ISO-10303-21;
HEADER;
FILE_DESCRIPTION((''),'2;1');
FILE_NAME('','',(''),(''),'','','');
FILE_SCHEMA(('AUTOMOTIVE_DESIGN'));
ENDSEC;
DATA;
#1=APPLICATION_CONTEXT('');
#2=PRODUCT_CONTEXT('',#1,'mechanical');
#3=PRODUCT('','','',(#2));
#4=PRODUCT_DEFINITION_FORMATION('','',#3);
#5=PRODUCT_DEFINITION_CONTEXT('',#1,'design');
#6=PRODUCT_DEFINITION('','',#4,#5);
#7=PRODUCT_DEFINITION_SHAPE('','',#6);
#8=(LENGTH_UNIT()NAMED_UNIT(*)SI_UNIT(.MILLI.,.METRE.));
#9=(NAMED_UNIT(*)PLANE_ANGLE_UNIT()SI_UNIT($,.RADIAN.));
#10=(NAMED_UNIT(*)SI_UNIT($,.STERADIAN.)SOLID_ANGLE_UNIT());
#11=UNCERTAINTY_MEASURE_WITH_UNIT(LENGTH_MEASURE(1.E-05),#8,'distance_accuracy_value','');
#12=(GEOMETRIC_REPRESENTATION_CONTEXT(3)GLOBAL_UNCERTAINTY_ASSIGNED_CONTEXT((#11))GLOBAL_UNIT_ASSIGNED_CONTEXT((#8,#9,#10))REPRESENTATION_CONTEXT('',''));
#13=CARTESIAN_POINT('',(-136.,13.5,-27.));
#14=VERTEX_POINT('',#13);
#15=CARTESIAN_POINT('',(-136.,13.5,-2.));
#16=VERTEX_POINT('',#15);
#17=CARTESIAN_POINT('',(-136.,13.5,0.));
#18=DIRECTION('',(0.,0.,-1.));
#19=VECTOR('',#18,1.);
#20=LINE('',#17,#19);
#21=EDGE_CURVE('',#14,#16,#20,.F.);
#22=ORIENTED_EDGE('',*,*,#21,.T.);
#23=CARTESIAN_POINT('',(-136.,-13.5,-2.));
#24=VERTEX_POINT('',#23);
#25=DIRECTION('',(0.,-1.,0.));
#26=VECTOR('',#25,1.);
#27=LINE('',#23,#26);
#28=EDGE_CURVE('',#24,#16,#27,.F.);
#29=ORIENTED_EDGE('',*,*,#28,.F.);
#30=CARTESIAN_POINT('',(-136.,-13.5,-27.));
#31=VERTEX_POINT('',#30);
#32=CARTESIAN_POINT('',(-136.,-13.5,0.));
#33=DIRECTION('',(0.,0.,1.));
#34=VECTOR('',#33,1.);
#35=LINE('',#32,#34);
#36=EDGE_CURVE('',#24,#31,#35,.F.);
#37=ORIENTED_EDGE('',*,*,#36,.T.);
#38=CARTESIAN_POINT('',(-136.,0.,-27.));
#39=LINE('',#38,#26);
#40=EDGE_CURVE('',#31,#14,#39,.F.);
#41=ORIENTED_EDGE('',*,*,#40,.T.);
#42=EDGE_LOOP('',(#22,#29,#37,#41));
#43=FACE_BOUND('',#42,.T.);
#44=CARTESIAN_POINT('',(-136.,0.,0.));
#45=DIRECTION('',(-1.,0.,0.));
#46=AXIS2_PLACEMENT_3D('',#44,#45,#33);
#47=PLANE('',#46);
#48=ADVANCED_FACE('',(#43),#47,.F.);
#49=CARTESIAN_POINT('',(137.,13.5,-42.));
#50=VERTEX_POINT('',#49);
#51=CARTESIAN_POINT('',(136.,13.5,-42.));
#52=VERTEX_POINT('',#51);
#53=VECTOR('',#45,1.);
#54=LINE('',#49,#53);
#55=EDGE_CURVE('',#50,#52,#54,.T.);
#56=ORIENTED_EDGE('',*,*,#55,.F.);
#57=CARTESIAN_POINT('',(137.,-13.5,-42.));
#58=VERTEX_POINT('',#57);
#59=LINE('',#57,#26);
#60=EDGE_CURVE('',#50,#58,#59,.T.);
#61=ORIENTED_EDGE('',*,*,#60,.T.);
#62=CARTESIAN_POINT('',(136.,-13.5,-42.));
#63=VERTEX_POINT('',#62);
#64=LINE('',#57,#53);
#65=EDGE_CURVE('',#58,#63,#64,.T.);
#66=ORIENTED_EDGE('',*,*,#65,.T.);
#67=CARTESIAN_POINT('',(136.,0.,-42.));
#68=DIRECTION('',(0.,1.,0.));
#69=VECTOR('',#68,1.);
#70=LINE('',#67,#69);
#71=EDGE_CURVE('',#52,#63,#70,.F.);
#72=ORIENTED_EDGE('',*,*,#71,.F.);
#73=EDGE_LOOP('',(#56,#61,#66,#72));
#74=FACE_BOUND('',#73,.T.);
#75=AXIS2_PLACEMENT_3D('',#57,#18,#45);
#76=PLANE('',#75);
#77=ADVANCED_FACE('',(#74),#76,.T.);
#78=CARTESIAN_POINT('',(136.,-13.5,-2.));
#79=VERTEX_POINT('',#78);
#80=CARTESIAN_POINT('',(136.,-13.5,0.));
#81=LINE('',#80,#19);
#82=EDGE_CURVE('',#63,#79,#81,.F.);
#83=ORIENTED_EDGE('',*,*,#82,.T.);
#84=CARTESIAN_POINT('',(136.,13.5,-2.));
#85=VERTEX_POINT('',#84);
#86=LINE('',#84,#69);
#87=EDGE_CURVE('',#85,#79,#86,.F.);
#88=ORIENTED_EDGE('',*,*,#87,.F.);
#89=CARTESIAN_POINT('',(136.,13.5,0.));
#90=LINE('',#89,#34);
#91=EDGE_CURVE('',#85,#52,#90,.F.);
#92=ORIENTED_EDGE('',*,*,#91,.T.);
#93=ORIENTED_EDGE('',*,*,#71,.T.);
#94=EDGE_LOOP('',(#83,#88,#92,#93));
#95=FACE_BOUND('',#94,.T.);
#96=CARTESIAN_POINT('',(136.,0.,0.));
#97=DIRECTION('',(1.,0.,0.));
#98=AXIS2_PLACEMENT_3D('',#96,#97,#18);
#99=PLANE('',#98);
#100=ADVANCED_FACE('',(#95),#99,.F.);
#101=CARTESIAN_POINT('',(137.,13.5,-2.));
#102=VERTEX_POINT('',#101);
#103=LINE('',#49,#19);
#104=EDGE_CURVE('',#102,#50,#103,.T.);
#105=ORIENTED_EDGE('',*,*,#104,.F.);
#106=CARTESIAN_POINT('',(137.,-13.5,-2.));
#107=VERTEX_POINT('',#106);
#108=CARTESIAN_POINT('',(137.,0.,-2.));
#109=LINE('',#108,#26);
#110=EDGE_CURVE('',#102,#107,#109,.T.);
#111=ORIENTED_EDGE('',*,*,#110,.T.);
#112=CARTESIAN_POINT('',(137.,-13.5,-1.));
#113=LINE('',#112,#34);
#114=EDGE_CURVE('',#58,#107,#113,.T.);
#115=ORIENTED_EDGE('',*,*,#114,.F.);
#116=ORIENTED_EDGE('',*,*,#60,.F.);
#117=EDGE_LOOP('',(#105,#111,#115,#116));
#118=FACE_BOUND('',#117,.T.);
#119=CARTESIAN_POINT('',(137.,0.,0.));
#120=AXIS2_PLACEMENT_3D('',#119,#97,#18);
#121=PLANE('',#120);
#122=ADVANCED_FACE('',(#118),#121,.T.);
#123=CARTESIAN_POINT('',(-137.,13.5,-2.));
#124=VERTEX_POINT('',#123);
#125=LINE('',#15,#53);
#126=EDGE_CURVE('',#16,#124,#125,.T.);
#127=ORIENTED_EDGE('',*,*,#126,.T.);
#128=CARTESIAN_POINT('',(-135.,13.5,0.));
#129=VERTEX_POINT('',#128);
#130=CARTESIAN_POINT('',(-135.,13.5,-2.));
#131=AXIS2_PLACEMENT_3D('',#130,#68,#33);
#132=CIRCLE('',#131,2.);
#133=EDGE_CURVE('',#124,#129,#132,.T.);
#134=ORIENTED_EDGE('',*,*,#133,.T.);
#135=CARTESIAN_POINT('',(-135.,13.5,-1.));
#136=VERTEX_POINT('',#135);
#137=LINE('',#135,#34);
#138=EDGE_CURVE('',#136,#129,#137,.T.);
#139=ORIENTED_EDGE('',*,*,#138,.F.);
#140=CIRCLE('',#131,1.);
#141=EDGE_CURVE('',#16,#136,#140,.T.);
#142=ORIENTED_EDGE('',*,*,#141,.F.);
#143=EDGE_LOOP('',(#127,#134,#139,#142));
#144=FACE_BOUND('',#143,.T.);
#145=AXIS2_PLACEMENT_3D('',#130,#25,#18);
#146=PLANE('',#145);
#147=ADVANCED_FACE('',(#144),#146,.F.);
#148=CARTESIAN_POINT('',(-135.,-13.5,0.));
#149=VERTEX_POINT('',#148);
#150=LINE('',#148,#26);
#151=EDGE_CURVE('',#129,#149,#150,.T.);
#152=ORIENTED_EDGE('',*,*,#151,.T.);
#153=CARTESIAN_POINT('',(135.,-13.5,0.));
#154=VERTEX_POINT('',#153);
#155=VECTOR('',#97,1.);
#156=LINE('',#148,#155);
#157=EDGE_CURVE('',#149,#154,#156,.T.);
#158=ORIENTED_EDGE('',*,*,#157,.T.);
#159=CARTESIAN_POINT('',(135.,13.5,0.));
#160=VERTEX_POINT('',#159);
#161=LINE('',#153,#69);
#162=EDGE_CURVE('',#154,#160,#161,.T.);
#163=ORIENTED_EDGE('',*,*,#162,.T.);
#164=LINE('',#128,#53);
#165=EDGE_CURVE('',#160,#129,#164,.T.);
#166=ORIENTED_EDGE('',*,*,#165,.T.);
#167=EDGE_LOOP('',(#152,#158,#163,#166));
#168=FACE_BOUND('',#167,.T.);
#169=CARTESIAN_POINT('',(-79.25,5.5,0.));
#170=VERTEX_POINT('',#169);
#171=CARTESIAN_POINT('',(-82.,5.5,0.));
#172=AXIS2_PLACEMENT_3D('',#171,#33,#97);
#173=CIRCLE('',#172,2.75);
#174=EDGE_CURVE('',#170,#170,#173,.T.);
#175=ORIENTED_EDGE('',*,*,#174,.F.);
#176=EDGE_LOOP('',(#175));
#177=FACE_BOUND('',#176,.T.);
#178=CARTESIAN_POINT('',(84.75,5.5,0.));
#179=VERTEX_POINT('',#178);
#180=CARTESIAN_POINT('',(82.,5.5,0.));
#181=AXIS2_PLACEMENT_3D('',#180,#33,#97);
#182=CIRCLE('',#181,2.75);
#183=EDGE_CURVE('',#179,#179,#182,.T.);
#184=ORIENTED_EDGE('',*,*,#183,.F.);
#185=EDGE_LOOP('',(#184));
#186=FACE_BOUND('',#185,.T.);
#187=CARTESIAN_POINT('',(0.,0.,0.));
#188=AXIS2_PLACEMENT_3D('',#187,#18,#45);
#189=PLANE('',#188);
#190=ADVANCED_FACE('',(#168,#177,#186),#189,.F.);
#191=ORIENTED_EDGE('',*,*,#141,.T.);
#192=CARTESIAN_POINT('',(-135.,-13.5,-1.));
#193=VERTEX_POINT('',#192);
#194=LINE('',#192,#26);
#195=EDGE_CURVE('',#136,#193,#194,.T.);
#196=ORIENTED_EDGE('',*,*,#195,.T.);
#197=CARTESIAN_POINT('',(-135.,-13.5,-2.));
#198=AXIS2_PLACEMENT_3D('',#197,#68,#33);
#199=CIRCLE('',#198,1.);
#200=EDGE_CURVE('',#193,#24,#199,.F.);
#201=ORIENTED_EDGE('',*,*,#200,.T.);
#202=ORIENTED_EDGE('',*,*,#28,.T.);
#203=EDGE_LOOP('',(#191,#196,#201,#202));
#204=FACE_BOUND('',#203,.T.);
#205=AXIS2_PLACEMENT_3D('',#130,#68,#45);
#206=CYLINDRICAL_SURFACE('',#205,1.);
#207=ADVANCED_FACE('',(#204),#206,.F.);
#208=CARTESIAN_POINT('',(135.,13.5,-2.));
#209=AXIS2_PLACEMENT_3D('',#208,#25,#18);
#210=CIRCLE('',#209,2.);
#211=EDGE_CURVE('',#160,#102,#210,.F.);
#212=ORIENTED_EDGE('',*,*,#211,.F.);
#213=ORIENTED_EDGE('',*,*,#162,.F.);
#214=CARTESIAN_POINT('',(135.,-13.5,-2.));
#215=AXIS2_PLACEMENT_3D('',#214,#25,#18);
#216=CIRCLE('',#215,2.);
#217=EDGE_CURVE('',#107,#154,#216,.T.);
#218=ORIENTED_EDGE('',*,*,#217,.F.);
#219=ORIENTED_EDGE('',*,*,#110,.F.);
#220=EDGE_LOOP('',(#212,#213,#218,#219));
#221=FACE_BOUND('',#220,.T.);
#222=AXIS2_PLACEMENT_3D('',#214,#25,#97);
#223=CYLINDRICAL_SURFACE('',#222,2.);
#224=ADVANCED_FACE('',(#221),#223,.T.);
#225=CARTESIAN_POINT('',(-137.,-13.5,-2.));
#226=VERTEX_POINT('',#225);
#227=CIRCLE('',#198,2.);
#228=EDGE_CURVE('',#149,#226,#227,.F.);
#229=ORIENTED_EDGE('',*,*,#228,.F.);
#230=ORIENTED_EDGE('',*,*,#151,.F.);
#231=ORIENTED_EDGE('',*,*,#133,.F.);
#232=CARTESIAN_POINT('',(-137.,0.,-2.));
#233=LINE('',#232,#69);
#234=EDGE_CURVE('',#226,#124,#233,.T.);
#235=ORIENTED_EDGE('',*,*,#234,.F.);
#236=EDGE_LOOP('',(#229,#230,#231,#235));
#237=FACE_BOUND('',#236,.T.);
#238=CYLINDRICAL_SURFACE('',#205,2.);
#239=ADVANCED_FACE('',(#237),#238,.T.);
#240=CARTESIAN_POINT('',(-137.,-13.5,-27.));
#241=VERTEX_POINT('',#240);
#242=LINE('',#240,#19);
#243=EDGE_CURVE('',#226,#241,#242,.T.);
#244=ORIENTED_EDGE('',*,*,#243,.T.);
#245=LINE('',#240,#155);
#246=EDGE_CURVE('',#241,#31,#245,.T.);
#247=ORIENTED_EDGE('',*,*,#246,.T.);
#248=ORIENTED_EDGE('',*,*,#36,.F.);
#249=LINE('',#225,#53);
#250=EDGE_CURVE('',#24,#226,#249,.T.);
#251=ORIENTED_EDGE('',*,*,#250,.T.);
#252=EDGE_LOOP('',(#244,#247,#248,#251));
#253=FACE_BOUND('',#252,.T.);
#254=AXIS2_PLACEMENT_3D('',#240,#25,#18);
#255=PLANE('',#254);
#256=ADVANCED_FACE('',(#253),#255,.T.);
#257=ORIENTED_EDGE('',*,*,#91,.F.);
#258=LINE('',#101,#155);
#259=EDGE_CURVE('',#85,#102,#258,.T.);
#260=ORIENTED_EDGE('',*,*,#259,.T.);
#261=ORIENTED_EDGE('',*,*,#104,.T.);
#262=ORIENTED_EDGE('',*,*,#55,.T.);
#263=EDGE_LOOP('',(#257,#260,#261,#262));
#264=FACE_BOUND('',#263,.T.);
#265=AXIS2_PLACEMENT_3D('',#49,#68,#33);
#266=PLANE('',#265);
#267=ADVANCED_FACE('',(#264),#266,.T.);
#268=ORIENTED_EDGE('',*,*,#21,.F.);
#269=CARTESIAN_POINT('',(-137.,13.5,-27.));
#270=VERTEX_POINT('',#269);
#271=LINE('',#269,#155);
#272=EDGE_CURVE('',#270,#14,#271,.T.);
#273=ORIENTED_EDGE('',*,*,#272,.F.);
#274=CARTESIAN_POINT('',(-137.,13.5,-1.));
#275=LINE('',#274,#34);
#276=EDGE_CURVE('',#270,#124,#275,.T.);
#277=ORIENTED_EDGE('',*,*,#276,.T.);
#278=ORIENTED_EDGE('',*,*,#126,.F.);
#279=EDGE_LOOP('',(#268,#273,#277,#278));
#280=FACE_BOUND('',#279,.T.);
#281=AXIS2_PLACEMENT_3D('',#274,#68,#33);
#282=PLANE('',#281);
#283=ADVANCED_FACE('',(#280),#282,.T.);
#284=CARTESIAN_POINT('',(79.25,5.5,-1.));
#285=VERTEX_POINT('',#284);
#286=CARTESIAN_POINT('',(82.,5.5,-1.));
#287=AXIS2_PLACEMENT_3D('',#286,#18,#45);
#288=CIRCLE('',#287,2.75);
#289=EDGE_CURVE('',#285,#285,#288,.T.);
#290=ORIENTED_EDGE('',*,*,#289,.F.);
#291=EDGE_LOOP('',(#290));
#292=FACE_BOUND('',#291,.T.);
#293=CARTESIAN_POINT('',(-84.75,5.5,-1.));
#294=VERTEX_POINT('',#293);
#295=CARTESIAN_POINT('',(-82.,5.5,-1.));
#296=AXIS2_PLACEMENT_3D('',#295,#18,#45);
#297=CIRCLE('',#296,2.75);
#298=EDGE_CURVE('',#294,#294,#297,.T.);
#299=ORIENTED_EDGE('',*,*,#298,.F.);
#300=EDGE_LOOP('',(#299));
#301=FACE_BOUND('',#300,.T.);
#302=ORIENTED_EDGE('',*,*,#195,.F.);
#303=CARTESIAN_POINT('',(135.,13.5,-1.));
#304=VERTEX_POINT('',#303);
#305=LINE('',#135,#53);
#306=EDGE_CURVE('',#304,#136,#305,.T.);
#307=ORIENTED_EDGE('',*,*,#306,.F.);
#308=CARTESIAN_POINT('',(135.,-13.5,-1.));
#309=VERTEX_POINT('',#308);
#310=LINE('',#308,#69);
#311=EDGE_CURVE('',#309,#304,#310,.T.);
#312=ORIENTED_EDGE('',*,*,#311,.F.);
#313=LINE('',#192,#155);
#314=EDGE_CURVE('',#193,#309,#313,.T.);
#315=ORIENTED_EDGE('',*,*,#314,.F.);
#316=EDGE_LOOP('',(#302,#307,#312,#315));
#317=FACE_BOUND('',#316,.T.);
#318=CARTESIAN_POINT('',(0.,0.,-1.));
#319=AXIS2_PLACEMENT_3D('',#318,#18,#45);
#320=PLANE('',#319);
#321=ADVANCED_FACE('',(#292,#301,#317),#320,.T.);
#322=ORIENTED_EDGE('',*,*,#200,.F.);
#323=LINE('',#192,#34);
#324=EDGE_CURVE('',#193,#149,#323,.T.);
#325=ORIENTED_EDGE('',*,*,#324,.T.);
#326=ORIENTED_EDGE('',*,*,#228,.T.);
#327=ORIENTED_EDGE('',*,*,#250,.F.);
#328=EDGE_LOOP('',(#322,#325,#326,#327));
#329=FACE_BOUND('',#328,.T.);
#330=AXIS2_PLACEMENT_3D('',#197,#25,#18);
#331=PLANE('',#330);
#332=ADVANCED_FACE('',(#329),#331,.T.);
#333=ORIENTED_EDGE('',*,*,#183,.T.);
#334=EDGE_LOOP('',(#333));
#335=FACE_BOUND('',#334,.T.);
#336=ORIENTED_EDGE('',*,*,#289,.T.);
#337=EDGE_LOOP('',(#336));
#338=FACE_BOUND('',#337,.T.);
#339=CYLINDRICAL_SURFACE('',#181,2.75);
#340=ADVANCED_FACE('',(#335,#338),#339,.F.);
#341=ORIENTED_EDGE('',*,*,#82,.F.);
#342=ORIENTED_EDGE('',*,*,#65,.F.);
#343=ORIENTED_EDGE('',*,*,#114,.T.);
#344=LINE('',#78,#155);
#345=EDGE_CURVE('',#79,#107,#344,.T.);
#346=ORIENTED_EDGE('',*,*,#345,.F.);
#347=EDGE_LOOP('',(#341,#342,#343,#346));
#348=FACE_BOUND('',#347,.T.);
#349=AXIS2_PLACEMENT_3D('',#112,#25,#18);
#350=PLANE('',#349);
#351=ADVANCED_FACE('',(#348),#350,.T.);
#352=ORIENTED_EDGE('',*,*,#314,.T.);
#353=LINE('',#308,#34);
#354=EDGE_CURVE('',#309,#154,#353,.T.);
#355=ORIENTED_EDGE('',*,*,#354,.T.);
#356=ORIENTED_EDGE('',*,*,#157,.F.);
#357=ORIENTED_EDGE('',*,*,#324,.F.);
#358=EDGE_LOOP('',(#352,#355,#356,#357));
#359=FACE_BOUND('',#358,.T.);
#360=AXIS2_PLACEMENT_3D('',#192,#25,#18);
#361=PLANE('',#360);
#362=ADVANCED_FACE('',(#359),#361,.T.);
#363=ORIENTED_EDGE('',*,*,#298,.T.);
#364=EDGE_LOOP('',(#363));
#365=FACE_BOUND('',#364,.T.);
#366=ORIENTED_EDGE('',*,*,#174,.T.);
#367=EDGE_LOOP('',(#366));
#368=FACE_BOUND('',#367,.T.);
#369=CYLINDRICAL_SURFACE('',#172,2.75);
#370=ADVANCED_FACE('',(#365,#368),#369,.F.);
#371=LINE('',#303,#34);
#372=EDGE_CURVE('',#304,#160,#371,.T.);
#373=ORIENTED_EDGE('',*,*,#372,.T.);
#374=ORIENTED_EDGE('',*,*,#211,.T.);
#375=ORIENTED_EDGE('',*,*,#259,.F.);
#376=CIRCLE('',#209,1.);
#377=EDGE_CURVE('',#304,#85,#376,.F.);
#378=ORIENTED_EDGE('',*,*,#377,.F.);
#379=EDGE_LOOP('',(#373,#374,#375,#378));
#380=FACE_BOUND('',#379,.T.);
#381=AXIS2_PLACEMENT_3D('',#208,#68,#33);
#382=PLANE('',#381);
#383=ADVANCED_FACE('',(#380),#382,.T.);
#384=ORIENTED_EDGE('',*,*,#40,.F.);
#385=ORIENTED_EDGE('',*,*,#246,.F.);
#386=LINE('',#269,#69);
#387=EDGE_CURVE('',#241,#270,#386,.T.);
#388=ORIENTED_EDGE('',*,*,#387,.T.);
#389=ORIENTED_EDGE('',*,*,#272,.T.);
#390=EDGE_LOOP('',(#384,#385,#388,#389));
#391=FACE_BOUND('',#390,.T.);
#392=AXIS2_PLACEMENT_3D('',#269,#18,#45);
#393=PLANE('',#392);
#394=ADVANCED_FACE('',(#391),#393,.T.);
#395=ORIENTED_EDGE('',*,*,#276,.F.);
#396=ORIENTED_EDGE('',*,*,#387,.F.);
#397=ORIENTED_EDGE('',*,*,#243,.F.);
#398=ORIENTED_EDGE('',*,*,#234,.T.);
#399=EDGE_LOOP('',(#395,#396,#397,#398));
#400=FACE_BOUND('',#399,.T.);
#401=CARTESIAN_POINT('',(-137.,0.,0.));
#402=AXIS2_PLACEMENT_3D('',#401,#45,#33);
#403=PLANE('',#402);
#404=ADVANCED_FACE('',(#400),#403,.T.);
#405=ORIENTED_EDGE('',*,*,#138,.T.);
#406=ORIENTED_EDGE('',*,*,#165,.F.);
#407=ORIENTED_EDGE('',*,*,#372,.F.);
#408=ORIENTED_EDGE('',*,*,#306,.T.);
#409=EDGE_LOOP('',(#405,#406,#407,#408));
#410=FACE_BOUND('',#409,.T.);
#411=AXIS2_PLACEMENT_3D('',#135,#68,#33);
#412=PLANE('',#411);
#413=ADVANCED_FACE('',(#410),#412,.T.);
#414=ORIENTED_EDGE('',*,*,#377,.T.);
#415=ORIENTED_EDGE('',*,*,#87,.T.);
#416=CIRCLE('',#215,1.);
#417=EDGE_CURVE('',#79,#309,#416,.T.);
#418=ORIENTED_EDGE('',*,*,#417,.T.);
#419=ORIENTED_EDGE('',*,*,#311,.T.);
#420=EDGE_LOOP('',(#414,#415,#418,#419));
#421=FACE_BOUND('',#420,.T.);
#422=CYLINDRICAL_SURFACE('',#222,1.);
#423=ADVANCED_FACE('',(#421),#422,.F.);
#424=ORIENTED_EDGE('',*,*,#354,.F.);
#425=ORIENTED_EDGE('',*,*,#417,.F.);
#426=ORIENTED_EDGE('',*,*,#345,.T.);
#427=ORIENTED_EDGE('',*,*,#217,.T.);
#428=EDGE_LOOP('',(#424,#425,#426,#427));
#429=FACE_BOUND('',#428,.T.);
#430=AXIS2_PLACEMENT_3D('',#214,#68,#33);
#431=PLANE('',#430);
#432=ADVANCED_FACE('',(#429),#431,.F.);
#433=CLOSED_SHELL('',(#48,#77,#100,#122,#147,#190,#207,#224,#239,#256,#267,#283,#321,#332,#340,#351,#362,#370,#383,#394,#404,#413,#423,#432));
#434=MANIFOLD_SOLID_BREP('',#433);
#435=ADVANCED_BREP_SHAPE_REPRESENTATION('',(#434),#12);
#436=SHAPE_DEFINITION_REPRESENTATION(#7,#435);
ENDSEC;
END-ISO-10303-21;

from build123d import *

# Parameters (mm, degrees)
SKETCH1_W            = 270
SKETCH1_H            = 27
BASE_FLANGE1_DEPTH   = 1
EDGE_FLANGE1_DEPTH   = 27
EDGE_FLANGE2_DEPTH   = 27
M5_CLEARANCE_HOLE1_D = 5.5


# Sheet-metal steps are written as plain solids
with BuildPart() as part:
    # Sketch1 → Base-Flange1 (new body)
    with BuildSketch(Plane.XY):
        Rectangle(SKETCH1_W, SKETCH1_H)
    extrude(amount=-BASE_FLANGE1_DEPTH)

    # Edge-Flange1 section (across the edge) → Edge-Flange1 (add)
    with BuildSketch(Plane(origin=(136, 13.5, -1), x_dir=(-1, 0, 0), z_dir=(0, -1, 0))):
        with BuildLine():
            Line((-1, 1), (-1, 41))
            Line((-1, 41), (0, 41))
            Line((0, 41), (0, 1))
            ThreePointArc((0, 1), (0.292893219, 0.292893219), (1, 0))
            Line((1, 0), (1, -1))
            ThreePointArc((1, -1), (-0.414213562, -0.414213562), (-1, 1))
        make_face()
    extrude(amount=EDGE_FLANGE1_DEPTH)

    # Edge-Flange2 section (across the edge) → Edge-Flange2 (add)
    with BuildSketch(Plane(origin=(-136, -13.5, -1), x_dir=(1, 0, 0), z_dir=(0, 1, 0))):
        with BuildLine():
            Line((-1, 1), (-1, 26))
            Line((-1, 26), (0, 26))
            Line((0, 26), (0, 1))
            ThreePointArc((0, 1), (0.292893219, 0.292893219), (1, 0))
            Line((1, 0), (1, -1))
            ThreePointArc((1, -1), (-0.414213562, -0.414213562), (-1, 1))
        make_face()
    extrude(amount=EDGE_FLANGE2_DEPTH)

    # M5 Clearance Hole1 (through all)
    with Locations(Plane.XY):
        with Locations((82, 5.5), (-82, 5.5)):
            Hole(M5_CLEARANCE_HOLE1_D / 2)


solid = part.part
